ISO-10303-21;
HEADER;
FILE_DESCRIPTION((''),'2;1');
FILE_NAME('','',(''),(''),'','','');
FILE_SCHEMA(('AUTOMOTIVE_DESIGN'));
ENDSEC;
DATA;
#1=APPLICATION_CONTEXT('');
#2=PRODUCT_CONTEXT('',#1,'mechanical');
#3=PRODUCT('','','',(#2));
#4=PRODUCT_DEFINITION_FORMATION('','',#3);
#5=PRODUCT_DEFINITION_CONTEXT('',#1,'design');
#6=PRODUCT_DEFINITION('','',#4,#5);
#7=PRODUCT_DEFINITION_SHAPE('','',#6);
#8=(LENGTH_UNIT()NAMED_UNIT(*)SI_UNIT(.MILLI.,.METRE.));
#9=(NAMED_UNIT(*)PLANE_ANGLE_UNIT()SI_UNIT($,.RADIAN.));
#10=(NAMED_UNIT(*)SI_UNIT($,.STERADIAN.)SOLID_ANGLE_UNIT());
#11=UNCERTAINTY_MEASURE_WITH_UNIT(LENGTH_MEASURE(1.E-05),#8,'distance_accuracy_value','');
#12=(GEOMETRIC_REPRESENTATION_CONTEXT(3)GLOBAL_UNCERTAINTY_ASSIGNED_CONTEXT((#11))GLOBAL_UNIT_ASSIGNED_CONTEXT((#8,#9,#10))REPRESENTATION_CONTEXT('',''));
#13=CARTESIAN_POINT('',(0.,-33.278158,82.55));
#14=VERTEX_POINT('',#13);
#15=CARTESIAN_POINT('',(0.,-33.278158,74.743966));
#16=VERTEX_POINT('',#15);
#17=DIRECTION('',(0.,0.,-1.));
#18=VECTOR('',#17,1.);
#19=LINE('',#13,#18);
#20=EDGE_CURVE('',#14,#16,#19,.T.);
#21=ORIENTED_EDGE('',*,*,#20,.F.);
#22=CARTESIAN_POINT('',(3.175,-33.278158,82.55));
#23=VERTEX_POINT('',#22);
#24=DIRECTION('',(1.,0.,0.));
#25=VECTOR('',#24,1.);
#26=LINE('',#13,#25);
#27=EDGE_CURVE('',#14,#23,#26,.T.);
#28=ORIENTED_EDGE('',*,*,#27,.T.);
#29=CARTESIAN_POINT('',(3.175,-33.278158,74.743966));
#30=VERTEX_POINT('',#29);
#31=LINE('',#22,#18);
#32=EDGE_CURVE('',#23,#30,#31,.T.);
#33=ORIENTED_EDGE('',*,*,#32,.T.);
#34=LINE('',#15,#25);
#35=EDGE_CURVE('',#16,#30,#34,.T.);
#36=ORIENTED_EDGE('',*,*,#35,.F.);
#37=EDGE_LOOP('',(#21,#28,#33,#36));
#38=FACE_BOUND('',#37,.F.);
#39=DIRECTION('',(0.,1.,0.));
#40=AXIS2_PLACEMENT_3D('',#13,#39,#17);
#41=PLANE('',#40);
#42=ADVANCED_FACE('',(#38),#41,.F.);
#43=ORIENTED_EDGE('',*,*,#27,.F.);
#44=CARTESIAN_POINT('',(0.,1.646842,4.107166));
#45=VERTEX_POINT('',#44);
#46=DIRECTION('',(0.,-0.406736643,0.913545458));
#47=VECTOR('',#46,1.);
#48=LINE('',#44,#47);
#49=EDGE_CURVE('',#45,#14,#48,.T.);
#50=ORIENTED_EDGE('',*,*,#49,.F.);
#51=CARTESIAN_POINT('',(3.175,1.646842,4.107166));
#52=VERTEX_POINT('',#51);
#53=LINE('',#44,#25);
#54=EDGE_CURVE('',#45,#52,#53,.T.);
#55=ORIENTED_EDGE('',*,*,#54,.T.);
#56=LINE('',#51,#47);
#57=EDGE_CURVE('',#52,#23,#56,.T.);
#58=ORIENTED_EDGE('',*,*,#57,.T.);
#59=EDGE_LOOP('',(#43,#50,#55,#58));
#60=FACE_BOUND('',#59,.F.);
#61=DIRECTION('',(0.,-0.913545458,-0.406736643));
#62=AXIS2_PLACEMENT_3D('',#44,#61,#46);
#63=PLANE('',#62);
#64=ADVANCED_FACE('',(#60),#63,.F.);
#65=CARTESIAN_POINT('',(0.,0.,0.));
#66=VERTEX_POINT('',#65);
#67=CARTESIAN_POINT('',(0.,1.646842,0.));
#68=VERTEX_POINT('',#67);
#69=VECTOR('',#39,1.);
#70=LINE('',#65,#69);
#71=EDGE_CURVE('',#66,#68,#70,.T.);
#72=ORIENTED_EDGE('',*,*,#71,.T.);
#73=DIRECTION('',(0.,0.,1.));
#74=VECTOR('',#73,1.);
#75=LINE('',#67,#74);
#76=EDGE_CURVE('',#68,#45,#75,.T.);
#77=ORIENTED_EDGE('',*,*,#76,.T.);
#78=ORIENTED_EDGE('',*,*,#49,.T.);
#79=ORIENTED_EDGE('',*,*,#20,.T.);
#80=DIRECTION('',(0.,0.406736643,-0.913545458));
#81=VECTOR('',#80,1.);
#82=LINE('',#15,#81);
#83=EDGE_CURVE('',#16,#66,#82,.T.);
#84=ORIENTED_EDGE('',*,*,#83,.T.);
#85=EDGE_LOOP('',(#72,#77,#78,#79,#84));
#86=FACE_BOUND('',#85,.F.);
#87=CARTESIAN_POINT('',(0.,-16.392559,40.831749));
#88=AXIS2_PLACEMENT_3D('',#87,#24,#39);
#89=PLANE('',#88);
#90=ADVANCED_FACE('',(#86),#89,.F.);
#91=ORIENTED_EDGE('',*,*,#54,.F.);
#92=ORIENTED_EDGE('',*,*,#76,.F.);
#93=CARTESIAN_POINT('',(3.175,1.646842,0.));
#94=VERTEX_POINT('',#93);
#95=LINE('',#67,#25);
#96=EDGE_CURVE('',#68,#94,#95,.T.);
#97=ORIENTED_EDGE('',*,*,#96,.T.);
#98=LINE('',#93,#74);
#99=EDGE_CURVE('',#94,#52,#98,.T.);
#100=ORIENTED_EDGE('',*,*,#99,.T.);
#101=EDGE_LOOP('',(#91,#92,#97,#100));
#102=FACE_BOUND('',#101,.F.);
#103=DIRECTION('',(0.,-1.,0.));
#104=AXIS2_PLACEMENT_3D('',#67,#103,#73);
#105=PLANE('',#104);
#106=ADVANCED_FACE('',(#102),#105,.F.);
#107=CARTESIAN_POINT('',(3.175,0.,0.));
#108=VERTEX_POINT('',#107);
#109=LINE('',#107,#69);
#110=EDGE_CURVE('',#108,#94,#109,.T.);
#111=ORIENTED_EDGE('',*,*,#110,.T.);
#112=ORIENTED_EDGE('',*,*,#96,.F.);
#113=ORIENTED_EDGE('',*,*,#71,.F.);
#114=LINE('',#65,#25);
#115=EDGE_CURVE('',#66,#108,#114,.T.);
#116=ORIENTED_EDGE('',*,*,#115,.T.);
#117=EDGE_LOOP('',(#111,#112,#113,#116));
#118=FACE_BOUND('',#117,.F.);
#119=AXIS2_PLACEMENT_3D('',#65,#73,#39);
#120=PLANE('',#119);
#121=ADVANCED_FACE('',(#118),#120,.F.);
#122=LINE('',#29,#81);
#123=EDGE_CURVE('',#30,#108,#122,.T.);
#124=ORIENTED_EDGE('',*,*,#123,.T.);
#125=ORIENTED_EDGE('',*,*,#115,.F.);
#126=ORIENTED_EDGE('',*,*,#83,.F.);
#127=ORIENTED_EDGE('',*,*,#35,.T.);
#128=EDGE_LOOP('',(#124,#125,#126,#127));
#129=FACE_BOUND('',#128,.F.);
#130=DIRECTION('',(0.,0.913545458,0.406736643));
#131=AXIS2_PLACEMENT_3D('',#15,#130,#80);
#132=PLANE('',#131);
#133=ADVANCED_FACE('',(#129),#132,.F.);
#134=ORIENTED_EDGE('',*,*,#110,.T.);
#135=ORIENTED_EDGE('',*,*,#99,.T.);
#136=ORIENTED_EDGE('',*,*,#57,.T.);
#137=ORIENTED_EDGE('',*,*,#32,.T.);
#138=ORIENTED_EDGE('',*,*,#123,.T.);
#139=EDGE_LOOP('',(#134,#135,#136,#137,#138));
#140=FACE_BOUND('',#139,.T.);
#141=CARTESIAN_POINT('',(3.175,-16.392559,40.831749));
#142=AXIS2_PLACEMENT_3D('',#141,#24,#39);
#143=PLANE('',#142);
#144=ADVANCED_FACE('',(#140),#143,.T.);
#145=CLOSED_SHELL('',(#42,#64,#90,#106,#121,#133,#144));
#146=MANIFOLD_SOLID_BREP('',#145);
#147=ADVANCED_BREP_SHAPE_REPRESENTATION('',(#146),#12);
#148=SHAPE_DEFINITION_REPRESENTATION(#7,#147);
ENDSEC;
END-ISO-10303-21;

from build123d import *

# Parameters (mm, degrees)
F1_DEPTH = 3.175


# Not quite as in the source:
# - a feature names something its author has since deleted; it is built from what else it names


with BuildPart() as f1:
    # F0 (on Right) → F1 (new body)
    with BuildSketch(Plane.YZ):
        Polygon((1.646842212, 4.1071656714), (-33.278157788, 82.55), (-33.278157788, 74.7439661596), (0, 0), (1.646842212, 0), align=None)
    extrude(amount=F1_DEPTH)


solid = f1.part
